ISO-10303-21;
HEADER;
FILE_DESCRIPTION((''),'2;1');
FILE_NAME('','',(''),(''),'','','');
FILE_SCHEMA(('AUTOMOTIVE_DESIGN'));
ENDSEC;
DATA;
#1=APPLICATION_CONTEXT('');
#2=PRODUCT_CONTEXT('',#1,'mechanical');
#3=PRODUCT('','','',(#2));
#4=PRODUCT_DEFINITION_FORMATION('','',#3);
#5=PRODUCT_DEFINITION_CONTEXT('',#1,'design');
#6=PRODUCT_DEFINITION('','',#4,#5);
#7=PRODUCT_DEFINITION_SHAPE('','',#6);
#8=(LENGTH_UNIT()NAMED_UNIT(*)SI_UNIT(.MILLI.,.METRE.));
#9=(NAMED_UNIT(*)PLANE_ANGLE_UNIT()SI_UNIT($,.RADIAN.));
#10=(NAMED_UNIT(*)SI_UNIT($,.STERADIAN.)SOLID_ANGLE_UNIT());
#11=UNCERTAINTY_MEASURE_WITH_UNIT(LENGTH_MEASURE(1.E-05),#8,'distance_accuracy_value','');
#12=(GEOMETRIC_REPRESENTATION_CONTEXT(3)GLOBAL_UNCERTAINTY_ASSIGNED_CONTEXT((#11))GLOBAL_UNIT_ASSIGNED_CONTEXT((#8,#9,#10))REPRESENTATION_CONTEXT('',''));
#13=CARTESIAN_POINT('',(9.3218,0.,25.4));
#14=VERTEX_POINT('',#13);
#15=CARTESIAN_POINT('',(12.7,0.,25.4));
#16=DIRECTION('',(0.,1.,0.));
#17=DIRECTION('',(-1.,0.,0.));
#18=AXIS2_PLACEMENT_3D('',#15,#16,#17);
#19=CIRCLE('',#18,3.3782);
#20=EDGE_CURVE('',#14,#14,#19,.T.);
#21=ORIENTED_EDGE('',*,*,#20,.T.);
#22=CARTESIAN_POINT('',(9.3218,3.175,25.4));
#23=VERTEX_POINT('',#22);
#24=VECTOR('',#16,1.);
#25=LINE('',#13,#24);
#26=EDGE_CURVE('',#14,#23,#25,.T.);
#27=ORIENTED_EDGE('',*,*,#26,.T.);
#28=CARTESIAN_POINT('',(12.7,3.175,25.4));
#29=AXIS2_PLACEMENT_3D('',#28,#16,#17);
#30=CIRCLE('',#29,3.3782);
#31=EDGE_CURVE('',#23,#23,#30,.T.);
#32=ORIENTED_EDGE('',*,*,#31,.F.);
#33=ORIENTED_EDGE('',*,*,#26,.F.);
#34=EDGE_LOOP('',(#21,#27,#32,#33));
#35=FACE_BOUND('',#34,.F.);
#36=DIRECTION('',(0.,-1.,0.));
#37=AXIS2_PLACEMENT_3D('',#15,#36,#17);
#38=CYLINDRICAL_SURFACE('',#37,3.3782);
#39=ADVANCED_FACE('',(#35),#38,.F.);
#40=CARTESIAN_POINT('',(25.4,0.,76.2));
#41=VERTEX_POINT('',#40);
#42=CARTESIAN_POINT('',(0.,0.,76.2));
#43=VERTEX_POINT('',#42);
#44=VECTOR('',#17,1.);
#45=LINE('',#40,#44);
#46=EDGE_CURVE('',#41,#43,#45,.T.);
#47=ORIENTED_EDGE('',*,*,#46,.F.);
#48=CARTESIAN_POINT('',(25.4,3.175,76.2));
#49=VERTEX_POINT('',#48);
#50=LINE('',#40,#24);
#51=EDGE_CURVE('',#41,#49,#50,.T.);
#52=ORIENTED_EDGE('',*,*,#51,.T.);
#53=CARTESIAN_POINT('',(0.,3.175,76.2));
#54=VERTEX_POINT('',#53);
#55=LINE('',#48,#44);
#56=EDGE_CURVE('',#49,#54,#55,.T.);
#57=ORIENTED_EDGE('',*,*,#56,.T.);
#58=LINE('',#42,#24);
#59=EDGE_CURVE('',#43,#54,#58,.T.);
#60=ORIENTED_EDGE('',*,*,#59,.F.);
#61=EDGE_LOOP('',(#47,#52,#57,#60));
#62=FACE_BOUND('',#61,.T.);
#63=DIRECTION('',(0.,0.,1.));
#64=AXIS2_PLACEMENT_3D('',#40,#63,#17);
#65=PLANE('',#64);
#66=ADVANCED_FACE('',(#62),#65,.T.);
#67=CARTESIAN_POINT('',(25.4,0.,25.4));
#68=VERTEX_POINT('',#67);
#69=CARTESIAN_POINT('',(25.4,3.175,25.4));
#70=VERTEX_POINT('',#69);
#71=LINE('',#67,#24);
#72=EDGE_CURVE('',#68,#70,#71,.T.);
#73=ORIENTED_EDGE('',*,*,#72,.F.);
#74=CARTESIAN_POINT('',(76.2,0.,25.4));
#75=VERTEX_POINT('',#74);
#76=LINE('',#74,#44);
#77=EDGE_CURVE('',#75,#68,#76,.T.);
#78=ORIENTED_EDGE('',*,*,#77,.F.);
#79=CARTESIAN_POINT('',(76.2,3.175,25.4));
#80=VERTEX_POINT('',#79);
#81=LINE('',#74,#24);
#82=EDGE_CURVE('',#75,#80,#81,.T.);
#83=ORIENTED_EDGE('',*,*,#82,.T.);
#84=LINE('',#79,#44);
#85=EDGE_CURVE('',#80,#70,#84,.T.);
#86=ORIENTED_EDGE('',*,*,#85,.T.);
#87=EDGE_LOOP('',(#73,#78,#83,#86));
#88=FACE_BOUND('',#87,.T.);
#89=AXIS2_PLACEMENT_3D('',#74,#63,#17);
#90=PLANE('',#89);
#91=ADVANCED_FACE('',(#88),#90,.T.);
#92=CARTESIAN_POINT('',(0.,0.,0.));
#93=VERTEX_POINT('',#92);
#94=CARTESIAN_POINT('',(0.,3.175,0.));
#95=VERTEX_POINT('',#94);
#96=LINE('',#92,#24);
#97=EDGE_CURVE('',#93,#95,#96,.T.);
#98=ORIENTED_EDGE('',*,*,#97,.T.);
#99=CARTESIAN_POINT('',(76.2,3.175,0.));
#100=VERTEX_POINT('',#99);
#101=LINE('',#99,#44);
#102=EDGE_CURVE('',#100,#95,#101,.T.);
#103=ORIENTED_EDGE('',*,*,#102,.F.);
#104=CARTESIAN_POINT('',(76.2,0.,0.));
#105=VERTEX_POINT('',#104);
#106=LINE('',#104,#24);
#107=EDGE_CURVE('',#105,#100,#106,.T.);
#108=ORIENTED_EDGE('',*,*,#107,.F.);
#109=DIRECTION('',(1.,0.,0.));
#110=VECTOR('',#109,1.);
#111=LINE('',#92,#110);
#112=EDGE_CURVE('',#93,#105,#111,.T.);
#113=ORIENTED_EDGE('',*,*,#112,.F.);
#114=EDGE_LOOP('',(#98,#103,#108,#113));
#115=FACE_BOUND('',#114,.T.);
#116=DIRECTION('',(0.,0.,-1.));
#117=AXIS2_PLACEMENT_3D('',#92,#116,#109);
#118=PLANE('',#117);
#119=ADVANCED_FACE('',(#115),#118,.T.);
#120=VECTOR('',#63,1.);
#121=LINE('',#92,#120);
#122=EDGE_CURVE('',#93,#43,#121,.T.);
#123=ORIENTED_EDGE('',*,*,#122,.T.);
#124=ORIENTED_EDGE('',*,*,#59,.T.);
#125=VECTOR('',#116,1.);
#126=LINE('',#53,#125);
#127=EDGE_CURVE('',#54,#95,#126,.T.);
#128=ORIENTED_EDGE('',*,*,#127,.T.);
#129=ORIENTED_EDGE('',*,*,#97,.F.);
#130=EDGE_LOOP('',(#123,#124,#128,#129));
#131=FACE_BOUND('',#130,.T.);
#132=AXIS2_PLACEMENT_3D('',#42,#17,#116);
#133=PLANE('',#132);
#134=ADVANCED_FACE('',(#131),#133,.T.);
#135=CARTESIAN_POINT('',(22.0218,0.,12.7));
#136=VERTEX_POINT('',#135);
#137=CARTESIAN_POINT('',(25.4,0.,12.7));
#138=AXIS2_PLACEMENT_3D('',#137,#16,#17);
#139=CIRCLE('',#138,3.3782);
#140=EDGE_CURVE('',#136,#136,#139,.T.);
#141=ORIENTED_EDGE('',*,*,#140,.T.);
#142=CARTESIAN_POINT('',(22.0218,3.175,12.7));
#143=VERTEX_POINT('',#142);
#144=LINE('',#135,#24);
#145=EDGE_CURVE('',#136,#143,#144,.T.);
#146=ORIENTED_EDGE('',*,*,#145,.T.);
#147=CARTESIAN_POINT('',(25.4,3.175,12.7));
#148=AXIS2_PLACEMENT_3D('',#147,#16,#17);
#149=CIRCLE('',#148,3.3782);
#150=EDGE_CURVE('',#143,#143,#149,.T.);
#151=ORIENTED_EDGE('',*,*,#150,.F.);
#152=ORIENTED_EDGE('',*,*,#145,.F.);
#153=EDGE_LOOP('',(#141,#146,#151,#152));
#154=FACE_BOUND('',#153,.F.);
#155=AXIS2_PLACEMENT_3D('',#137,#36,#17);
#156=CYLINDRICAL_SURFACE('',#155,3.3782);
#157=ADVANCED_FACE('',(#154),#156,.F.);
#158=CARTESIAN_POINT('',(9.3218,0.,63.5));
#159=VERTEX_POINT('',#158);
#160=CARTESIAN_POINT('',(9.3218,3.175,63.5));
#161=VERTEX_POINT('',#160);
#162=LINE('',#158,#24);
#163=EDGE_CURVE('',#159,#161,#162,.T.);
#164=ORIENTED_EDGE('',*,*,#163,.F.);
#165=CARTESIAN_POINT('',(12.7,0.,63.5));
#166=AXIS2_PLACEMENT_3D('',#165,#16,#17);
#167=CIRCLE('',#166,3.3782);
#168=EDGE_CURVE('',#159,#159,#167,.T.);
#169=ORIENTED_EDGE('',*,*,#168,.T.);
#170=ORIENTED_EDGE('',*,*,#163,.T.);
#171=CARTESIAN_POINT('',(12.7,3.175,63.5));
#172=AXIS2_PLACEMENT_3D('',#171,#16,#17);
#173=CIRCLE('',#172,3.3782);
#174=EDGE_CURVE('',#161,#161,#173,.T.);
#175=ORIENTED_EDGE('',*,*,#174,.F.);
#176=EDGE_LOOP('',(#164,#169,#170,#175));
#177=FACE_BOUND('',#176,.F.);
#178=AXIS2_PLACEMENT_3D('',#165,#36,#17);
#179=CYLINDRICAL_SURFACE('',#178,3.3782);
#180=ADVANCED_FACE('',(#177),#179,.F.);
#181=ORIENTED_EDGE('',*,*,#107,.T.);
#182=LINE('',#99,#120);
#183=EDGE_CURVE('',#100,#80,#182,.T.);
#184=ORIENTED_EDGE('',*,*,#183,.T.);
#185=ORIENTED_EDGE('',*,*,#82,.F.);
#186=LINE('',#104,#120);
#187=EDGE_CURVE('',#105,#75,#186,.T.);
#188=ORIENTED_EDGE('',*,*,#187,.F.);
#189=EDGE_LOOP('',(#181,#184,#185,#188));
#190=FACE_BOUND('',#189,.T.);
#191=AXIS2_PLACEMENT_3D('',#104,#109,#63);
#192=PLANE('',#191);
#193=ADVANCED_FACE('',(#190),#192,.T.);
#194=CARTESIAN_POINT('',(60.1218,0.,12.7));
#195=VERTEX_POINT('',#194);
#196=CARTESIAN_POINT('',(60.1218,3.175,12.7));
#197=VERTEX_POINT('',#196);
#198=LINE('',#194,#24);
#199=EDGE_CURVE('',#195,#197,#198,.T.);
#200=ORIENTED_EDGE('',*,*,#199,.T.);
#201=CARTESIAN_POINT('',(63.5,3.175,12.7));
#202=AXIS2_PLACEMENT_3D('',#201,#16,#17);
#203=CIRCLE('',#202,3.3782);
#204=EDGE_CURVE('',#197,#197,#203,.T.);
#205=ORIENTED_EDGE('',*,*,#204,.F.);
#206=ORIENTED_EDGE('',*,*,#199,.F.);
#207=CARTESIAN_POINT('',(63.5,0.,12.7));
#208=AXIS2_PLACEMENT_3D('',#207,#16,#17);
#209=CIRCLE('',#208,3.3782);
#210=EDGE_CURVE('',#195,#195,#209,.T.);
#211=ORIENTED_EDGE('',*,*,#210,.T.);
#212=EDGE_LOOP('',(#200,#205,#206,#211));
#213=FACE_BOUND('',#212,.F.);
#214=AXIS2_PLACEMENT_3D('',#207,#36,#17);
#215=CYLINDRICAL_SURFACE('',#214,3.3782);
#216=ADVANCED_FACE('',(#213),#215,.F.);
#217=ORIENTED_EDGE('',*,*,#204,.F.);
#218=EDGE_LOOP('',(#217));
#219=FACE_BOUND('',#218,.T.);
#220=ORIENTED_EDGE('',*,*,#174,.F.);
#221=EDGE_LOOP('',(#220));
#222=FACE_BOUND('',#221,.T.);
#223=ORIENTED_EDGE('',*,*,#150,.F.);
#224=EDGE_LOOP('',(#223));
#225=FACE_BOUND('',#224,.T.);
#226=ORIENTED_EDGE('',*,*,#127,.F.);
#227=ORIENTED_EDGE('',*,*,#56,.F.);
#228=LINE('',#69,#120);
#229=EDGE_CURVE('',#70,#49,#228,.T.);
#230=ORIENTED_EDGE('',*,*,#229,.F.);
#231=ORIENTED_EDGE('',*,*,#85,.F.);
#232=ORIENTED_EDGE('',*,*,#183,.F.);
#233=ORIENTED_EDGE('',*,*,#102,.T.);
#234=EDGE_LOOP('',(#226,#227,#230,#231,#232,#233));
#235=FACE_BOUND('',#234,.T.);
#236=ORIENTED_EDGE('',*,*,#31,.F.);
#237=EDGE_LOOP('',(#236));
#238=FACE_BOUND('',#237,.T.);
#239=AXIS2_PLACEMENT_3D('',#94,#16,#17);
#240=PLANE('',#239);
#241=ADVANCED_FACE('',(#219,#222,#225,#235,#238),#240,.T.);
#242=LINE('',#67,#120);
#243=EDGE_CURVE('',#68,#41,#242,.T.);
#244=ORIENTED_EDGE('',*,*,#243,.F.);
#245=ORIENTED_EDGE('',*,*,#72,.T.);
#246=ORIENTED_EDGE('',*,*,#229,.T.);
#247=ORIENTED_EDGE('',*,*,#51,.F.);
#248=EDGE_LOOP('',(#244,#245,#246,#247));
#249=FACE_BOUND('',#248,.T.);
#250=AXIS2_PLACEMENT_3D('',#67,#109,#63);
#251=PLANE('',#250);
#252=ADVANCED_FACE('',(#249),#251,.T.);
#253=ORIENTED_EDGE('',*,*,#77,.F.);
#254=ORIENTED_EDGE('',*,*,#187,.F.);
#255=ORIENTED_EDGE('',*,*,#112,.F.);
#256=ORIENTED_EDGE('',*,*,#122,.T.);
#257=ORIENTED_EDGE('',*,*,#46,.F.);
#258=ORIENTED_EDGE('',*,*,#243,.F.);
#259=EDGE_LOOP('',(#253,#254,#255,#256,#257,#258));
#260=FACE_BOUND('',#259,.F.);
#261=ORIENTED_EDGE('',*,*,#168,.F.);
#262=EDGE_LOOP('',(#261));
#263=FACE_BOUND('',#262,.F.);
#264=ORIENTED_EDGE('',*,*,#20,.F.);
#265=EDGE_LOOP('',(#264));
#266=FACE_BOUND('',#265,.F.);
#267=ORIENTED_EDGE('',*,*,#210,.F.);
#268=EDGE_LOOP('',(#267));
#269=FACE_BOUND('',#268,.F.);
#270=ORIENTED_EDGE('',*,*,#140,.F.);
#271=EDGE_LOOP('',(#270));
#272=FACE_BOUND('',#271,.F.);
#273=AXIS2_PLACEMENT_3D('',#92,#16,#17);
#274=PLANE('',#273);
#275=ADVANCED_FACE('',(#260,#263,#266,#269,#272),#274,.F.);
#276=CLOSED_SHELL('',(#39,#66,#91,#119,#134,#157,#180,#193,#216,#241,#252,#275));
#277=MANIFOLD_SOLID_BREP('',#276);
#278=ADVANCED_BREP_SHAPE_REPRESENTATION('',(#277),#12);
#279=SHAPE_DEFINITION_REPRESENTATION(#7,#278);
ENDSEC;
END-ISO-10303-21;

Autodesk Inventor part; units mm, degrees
ref_plane "YZ Plane" through (0, 0, 0) normal (1, 0, 0) x (0, 1, 0)
ref_plane "XZ Plane" through (0, 0, 0) normal (0, 1, 0) x (-1, 0, 0)
ref_plane "XY Plane" through (0, 0, 0) normal (0, 0, 1) x (1, 0, 0)
sketch "Sketch1" plane through (0, 0, 0) normal (0, 1, 0) x (-1, 0, 0)
  circle A0 centre (-63.5, 12.7) radius 3.3782
  circle A1 centre (-25.4, 12.7) radius 3.3782
  circle A2 centre (-12.7, 25.4) radius 3.3782
  circle A3 centre (-12.7, 63.5) radius 3.3782
  line L0 (0, 76.2) -> (0, 25.4)
  line L1 (-25.4, 76.2) -> (0, 76.2)
  line L2 (-25.4, 25.4) -> (-25.4, 76.2)
  line L3 (-76.2, 25.4) -> (-25.4, 25.4)
  line L4 (-76.2, 0) -> (-76.2, 25.4)
  line L5 (-28.829, 0) -> (-76.2, 0)
  line L6 (15.621, -25.4) -> (-28.829, -25.4)
  line L7 (-28.829, -25.4) -> (-28.829, 0)
  line L8 (0, 25.4) -> (15.621, 25.4)
  line L9 (15.621, 25.4) -> (15.621, -25.4)
  line L10 (15.621, -25.4) -> (15.621, -25.4)
  point P0 (0, 0)
  point P1 (0, 0)
  dimension "d32" = 15.621
  dimension "d44" = 50.8
extrude "Plate1" add sketch "Sketch1" along normal blind 3.175
sketch "Sketch7" plane through (0, 0, 0) normal (0, -1, 0) x (1, 0, 0)
  line L0 (28.829, -25.4) -> (-15.621, -25.4) projected
  line L1 (28.829, 0) -> (28.829, -25.4) projected
  line L2 (76.2, 0) -> (28.829, 0) projected
  line L3 (-15.621, 25.4) -> (0, 25.4) projected
  line L4 (0, 25.4) -> (0, 0)
  line L5 (0, 0) -> (28.829, 0)
  line L6 (-15.621, -25.4) -> (-15.621, 25.4)
extrude "Cut3" cut sketch "Sketch7" against normal blind 3.175
equation "\"d45\" = Thickness"
equation "\"BendRadius\" = Thickness"
equation "\"BendReliefWidth\" = Thickness"
equation "\"BendReliefDepth\" = 0.5 * Thickness"
equation "\"CornerReliefSize\" = 4 * Thickness"
equation "\"MinimumRemnant\" = 2 * Thickness"
equation "\"TransitionRadius\" = BendRadius"
equation "\"JacobiRadiusSize\" = BendRadius"
equation "\"GapSize\" = Thickness"
equation "\"d1\" = BendRadius"
equation "\"Thickness\" = 3.175"
properties part number "Gusset Connector 2"
